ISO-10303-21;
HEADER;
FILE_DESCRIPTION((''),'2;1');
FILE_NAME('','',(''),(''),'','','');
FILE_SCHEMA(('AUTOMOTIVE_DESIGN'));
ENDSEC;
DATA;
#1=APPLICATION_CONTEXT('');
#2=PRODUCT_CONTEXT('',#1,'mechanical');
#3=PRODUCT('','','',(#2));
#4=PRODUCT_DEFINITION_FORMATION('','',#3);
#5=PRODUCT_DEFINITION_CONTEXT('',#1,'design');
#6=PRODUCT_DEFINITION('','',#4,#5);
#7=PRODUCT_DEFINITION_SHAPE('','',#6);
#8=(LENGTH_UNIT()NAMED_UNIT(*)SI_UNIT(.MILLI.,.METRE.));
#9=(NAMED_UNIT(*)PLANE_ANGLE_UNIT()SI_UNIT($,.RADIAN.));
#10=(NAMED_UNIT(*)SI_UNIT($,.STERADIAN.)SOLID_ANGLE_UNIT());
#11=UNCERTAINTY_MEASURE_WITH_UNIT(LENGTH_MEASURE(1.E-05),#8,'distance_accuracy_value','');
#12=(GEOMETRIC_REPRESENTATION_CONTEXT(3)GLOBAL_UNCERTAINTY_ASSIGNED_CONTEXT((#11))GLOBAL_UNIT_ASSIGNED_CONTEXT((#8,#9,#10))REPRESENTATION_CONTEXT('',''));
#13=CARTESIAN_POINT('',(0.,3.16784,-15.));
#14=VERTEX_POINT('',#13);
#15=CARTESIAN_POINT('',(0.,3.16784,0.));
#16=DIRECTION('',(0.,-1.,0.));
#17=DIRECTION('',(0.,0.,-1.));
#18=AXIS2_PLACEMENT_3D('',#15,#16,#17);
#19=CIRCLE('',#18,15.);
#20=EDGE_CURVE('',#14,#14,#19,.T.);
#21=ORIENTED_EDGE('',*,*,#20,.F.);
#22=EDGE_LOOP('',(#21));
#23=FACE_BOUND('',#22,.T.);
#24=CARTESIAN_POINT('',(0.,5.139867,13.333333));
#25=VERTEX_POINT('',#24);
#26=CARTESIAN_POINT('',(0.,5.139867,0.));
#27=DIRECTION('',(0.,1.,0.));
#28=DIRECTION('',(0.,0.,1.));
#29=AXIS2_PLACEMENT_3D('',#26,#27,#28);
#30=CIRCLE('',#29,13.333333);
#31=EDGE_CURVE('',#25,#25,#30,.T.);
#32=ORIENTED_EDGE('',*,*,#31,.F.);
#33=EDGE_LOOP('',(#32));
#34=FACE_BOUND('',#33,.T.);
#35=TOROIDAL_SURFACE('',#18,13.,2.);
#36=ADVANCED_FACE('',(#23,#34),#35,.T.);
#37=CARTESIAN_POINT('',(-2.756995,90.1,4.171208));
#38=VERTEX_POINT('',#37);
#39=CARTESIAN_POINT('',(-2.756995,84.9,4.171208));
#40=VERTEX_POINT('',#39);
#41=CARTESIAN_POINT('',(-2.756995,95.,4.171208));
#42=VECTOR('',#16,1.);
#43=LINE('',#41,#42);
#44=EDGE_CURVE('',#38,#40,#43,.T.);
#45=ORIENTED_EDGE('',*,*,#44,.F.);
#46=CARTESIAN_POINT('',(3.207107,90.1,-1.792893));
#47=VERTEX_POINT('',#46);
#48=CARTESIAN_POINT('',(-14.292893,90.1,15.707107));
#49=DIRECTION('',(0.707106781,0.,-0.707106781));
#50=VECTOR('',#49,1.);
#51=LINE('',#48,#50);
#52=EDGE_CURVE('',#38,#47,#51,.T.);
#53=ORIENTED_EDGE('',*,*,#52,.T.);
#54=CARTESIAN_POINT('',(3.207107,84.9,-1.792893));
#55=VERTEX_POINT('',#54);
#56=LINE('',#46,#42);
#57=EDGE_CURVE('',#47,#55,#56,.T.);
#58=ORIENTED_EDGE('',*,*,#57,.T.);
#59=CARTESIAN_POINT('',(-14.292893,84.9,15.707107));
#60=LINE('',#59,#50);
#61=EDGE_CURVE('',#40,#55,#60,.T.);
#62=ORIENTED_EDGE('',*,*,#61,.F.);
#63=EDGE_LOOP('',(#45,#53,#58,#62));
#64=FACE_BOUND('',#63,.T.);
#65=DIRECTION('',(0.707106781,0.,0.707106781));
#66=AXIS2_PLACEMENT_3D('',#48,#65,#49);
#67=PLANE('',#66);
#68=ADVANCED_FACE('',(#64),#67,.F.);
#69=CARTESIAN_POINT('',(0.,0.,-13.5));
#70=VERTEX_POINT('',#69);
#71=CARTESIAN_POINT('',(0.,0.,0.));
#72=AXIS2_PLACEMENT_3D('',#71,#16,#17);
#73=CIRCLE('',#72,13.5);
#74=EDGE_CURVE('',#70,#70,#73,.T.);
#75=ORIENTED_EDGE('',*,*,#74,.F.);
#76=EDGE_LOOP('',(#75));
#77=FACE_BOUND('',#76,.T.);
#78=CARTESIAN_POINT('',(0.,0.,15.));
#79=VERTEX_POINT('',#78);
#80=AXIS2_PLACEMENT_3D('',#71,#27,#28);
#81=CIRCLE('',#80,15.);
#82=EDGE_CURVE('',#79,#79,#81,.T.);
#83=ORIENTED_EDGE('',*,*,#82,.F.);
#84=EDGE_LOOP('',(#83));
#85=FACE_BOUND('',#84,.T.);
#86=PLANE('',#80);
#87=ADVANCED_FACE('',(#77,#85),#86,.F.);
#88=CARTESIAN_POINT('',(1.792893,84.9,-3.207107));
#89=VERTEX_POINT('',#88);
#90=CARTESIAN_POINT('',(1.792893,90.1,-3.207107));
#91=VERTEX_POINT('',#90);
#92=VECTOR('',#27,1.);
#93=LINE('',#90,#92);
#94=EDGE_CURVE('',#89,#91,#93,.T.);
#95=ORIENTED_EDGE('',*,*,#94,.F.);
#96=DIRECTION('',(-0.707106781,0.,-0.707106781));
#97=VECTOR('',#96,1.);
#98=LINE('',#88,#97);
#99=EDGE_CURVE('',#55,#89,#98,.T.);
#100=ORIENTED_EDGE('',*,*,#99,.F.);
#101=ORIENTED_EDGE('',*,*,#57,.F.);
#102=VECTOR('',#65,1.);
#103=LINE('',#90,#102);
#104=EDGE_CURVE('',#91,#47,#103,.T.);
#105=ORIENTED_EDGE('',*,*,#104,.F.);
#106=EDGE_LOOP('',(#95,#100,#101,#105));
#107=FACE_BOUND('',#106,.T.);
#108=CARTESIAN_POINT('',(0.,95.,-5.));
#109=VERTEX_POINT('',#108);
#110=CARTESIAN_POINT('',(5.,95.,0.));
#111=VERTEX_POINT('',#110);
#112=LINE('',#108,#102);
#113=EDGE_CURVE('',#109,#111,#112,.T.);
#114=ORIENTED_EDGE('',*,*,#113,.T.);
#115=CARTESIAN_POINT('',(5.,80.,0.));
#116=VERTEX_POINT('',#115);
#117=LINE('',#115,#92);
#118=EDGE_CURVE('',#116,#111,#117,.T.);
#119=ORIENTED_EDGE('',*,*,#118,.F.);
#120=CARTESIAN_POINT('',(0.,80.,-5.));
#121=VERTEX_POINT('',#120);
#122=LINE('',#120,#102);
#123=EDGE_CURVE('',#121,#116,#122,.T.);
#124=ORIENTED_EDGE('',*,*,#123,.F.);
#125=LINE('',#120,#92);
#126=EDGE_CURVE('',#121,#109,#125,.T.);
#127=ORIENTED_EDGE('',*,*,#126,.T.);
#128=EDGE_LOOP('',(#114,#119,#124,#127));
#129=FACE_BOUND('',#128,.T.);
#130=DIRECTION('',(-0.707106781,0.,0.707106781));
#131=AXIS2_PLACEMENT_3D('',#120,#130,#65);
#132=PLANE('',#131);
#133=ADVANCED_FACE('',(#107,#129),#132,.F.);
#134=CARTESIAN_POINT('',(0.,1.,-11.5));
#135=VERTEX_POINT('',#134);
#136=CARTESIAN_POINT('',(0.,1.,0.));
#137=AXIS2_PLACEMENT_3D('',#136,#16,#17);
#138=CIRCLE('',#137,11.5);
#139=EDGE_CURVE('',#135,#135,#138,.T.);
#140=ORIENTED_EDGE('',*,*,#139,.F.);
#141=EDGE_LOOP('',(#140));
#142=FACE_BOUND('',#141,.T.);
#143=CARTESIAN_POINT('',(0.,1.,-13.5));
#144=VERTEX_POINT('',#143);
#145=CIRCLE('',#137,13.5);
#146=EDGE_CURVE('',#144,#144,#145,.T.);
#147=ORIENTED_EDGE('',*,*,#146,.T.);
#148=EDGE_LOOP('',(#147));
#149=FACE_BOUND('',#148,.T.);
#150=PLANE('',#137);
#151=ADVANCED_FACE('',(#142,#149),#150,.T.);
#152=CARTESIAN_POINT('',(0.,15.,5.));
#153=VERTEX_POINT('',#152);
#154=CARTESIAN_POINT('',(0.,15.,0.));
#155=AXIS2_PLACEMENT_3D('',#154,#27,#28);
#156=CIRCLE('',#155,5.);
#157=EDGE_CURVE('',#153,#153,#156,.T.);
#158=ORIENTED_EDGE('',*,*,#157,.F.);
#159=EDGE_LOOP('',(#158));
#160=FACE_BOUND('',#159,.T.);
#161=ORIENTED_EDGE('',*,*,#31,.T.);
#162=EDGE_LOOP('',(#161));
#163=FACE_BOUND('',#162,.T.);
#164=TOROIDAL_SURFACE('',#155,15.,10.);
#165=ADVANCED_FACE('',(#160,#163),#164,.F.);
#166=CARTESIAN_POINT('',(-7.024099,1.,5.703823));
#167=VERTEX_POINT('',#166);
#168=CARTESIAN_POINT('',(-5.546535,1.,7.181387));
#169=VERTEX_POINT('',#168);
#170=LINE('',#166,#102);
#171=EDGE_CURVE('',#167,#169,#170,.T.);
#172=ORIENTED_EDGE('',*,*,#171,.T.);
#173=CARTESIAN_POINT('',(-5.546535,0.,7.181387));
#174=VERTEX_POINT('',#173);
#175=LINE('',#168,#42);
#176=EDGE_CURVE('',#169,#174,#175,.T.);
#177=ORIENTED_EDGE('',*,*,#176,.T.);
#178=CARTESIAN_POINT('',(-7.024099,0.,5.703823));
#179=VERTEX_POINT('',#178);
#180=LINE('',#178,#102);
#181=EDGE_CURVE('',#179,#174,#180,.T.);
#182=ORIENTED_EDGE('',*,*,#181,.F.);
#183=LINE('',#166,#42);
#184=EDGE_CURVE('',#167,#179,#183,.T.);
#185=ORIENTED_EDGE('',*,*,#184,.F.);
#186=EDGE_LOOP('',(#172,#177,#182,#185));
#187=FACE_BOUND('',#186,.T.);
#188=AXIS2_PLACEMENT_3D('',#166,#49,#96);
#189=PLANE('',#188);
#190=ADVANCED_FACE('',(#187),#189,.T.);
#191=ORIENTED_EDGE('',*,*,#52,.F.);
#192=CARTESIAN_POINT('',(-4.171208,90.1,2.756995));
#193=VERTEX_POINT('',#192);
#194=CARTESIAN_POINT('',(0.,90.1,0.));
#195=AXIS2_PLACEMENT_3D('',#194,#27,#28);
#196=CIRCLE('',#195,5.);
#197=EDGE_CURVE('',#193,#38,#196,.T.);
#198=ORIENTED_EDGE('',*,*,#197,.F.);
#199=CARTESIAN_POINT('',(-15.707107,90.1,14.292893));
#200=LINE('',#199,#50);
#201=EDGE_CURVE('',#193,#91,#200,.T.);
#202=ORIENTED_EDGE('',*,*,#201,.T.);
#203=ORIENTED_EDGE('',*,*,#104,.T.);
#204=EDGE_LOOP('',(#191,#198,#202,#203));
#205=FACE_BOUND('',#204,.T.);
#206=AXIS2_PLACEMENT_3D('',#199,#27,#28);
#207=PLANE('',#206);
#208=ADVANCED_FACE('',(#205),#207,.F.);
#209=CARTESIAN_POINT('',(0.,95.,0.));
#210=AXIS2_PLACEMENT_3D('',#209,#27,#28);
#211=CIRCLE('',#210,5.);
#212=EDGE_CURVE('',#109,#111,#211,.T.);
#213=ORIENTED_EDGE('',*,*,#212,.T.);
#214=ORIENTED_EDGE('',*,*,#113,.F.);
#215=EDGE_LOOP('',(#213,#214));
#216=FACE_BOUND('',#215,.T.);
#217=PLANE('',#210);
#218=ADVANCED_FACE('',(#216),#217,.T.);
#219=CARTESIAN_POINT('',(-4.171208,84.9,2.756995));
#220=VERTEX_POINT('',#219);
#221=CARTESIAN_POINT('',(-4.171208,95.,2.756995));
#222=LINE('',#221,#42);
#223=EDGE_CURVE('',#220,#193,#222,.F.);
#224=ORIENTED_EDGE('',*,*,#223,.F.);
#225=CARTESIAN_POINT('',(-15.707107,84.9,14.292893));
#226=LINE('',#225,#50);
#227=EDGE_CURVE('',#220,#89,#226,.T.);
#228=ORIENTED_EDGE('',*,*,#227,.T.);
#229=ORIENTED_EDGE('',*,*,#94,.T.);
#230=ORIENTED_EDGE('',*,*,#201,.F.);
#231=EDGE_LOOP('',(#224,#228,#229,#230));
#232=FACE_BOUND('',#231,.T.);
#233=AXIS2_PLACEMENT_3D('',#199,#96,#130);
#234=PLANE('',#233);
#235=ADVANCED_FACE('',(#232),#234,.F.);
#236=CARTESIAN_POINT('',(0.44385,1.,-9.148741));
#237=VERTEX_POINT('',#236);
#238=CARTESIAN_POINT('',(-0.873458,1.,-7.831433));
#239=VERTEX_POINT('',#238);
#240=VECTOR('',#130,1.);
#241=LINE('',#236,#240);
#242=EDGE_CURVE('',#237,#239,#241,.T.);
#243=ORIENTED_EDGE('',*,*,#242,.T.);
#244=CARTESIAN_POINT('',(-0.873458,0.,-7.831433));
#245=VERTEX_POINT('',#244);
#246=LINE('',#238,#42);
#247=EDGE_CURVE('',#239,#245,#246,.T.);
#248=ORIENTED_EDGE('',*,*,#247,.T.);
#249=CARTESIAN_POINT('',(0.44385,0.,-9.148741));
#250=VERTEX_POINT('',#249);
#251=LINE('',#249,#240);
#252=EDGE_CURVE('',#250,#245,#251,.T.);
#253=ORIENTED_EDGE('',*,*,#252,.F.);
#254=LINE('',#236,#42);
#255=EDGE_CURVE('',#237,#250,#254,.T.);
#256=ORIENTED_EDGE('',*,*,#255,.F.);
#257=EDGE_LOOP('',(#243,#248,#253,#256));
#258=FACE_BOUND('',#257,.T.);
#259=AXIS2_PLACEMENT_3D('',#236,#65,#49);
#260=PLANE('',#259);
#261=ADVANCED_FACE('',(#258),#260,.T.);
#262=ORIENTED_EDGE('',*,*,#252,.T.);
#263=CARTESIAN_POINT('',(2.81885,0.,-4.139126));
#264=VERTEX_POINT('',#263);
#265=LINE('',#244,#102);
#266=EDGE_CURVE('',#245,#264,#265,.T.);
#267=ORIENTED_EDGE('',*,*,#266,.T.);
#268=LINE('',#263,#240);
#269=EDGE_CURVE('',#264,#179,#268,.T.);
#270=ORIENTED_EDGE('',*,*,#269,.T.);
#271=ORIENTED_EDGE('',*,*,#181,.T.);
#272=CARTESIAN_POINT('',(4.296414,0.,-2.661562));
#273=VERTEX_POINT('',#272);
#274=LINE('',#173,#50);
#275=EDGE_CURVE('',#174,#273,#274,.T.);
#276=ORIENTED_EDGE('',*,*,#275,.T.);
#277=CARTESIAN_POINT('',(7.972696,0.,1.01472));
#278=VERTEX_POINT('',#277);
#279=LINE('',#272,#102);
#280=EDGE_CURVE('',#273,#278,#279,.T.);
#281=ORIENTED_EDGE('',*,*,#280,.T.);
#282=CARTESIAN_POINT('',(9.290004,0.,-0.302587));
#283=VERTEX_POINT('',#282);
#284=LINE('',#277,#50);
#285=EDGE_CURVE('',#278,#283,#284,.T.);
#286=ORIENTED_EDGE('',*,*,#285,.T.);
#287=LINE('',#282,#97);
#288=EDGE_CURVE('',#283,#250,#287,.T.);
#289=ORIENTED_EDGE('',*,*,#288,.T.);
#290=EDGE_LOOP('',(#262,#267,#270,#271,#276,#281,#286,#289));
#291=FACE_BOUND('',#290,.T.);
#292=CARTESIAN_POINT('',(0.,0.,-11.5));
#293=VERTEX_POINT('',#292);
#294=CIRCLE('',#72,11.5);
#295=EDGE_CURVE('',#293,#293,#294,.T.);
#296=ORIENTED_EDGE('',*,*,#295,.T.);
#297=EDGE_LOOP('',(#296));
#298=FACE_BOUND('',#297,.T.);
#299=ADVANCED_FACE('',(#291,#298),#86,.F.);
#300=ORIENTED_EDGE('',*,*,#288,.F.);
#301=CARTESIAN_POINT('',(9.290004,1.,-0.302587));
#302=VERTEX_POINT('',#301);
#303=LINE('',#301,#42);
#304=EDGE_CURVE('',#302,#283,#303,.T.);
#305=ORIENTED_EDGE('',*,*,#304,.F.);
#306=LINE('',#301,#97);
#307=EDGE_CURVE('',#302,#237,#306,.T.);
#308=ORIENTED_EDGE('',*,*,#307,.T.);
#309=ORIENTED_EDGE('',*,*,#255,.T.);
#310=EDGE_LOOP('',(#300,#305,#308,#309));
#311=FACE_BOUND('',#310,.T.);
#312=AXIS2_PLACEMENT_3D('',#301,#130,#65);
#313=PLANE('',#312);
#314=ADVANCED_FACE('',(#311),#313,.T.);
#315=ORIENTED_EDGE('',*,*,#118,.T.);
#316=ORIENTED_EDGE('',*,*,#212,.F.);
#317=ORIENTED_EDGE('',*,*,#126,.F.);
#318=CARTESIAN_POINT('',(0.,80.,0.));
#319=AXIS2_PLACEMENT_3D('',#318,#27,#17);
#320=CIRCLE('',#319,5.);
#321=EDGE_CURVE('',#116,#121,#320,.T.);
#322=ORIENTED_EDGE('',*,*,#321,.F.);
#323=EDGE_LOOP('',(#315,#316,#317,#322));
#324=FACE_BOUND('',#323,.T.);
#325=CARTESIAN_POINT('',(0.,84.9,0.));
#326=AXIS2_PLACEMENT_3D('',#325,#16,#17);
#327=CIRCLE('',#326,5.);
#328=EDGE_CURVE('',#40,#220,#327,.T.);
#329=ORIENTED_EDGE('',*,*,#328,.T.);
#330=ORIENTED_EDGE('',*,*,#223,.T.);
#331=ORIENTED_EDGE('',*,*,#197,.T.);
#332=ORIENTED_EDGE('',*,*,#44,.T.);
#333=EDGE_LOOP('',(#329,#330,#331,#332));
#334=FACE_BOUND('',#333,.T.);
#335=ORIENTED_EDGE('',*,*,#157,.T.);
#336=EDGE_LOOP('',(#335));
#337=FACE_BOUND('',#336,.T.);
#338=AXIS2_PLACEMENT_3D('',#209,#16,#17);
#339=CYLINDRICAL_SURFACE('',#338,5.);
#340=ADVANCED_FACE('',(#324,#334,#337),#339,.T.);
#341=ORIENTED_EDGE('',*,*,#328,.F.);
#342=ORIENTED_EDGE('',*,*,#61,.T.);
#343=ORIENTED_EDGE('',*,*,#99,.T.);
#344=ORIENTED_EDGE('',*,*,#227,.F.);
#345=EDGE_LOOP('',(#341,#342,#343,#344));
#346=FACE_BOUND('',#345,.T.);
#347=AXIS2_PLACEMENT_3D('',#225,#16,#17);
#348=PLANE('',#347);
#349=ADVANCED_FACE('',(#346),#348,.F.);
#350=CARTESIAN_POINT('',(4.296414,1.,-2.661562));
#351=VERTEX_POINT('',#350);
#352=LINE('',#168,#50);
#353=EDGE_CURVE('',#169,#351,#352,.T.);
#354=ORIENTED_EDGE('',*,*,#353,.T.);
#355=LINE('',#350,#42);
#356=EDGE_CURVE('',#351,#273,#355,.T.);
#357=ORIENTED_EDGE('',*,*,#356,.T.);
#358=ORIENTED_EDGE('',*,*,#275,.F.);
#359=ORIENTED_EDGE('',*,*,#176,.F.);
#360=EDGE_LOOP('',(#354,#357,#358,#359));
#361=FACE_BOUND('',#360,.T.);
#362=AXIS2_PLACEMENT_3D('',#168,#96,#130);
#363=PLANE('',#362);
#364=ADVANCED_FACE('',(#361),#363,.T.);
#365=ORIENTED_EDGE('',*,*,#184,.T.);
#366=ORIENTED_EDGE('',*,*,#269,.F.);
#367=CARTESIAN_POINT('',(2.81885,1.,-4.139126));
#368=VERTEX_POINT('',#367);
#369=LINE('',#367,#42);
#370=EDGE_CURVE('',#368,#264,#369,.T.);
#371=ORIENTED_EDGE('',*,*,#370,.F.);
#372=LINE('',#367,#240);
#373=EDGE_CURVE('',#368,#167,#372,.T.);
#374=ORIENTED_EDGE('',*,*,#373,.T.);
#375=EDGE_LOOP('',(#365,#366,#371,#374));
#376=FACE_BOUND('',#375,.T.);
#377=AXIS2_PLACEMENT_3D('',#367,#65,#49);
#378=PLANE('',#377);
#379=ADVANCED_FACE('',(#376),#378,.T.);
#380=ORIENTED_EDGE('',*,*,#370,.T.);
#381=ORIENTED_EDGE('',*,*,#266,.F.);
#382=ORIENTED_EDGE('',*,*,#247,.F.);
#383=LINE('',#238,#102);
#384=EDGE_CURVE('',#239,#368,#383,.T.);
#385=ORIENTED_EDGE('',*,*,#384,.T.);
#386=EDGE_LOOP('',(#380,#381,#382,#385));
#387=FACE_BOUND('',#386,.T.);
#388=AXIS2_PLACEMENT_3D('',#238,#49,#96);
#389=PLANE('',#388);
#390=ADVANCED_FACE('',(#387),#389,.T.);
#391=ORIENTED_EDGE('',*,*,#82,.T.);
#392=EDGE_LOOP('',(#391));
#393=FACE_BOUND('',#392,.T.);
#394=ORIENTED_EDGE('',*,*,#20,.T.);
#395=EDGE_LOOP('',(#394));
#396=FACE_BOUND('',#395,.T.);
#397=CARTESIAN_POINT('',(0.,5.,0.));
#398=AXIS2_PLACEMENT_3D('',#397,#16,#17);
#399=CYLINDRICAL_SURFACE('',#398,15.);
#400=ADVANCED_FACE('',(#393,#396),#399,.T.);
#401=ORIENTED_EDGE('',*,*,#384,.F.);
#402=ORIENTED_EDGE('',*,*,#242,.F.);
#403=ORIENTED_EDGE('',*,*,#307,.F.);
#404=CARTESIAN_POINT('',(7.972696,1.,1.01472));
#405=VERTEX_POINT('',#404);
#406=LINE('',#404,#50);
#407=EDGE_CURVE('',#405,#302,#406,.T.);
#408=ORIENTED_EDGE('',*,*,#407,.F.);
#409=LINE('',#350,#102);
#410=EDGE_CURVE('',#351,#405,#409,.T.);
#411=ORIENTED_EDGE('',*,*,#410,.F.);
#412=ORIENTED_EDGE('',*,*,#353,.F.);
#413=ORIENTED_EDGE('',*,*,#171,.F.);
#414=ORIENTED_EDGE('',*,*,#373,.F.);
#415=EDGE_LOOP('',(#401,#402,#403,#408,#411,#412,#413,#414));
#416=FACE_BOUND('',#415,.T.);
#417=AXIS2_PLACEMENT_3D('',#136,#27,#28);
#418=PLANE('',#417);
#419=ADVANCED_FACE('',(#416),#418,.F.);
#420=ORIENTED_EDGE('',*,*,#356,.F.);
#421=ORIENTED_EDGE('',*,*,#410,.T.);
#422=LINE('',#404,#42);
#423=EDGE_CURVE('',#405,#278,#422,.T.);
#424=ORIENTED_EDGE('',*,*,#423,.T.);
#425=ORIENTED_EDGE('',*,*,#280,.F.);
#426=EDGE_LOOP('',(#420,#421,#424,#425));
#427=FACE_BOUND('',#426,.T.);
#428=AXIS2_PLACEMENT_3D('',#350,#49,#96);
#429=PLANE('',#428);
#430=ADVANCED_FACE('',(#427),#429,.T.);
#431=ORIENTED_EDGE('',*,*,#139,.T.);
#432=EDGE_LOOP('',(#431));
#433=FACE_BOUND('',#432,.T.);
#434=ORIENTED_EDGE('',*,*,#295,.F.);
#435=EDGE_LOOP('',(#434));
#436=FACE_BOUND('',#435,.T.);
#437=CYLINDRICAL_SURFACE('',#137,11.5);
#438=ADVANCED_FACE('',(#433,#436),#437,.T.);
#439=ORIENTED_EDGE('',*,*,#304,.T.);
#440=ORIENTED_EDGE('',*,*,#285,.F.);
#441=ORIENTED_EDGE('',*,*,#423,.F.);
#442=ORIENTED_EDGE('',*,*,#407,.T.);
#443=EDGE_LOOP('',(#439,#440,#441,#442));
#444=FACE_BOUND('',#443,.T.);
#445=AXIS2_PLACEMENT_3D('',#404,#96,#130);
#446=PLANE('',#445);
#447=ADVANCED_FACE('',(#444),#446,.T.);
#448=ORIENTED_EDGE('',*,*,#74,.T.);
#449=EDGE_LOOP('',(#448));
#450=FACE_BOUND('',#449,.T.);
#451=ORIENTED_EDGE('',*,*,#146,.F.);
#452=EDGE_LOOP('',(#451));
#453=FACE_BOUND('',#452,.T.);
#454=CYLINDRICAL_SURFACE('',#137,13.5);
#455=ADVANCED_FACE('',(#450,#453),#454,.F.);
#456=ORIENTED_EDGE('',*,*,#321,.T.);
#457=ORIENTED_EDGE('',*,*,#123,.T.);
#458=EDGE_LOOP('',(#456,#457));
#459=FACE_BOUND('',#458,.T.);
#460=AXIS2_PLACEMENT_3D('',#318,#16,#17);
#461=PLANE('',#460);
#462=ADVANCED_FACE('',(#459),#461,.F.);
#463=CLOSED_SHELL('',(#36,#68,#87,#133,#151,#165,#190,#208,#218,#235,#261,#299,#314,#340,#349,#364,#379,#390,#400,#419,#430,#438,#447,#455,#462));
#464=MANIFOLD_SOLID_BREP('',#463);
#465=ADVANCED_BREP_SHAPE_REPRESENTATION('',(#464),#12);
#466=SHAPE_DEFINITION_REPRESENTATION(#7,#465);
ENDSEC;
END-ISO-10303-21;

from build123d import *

# Parameters (mm, degrees)
SKETCH1_R           = 15
BOSS_EXTRUDE1_DEPTH = 5
SKETCH2_R           = 5
BOSS_EXTRUDE2_DEPTH = 90
CUT_EXTRUDE1_START  = -15
CUT_EXTRUDE1_DEPTH  = 15
SKETCH4_W           = 2
SKETCH4_H           = 5.2
CUT_EXTRUDE2_DEPTH  = 99.17076958
FILLET1_R           = 10
FILLET2_R           = 2
CUT_EXTRUDE3_DEPTH  = 1
SKETCH6_R           = 13.5
SKETCH6_R_2         = 11.5
CUT_EXTRUDE4_DEPTH  = 1


with BuildPart() as part:
    # Sketch1 → Boss-Extrude1 (new body)
    with BuildSketch(Plane(origin=(0, 0, 0), x_dir=(1, 0, 0), z_dir=(0, 1, 0))):
        with Locations(Location((0, 0, 0), (0, 0, 270))):
            Circle(SKETCH1_R)
    extrude(amount=BOSS_EXTRUDE1_DEPTH)

    # Sketch2 → Boss-Extrude2 (add)
    with BuildSketch(Plane(origin=(0, 5, 0), x_dir=(1, 0, 0), z_dir=(0, 1, 0))):
        with Locations(Location((0, 0, 0), (0, 0, 90))):
            Circle(SKETCH2_R)
    extrude(amount=BOSS_EXTRUDE2_DEPTH)

    # Sketch3 → Cut-Extrude1 (cut)
    with BuildSketch(Plane(origin=(0, 95, 0), x_dir=(1, 0, 0), z_dir=(0, 1, 0)).offset(CUT_EXTRUDE1_START)):
        with BuildLine():
            Line((0, 5), (5, 0))
            ThreePointArc((5, 0), (3.535533906, 3.535533906), (0, 5))
        make_face()
    extrude(amount=CUT_EXTRUDE1_DEPTH, mode=Mode.SUBTRACT)

    # Sketch4 → Cut-Extrude2 (cut, through all)
    with BuildSketch(Plane(origin=(2.5, 0, -2.5), x_dir=(-0.7071067811865475, 0, -0.7071067811865477), z_dir=(0.7071067811865477, 0, -0.7071067811865475))):
        with Locations((0, 87.5)):
            Rectangle(SKETCH4_W, SKETCH4_H)
    extrude(amount=-CUT_EXTRUDE2_DEPTH, mode=Mode.SUBTRACT)

    # Fillet1
    fillet1_edges = [part.edges().sort_by_distance(p)[0] for p in [
        (0, 5, 5),
    ]]
    fillet(fillet1_edges, radius=FILLET1_R - 0.0001)  # a hair under: the kernel refuses the full size

    # Fillet2
    fillet2_edges = [part.edges().sort_by_distance(p)[0] for p in [
        (0, 5, -15),
    ]]
    fillet(fillet2_edges, radius=FILLET2_R)

    # Sketch5 → Cut-Extrude3 (cut)
    with BuildSketch(Plane.XZ):
        Polygon((-5.546534945, 7.181387117), (4.296413773, -2.661561601), (7.972695825, 1.01472045), (9.290003517, -0.302587242), (0.443849671, -9.148741088), (-0.873458021, -7.831433396), (2.818849671, -4.139125704), (-7.024099047, 5.703823014), align=None)
    extrude(amount=-CUT_EXTRUDE3_DEPTH, mode=Mode.SUBTRACT)

    # Sketch6 → Cut-Extrude4 (cut)
    with BuildSketch(Plane.XZ):
        with Locations(Location((0, 0, 0), (0, 0, 270))):
            Circle(SKETCH6_R)
        with Locations(Location((0, 0, 0), (0, 0, 270))):
            Circle(SKETCH6_R_2, mode=Mode.SUBTRACT)
    extrude(amount=-CUT_EXTRUDE4_DEPTH, mode=Mode.SUBTRACT)


solid = part.part
